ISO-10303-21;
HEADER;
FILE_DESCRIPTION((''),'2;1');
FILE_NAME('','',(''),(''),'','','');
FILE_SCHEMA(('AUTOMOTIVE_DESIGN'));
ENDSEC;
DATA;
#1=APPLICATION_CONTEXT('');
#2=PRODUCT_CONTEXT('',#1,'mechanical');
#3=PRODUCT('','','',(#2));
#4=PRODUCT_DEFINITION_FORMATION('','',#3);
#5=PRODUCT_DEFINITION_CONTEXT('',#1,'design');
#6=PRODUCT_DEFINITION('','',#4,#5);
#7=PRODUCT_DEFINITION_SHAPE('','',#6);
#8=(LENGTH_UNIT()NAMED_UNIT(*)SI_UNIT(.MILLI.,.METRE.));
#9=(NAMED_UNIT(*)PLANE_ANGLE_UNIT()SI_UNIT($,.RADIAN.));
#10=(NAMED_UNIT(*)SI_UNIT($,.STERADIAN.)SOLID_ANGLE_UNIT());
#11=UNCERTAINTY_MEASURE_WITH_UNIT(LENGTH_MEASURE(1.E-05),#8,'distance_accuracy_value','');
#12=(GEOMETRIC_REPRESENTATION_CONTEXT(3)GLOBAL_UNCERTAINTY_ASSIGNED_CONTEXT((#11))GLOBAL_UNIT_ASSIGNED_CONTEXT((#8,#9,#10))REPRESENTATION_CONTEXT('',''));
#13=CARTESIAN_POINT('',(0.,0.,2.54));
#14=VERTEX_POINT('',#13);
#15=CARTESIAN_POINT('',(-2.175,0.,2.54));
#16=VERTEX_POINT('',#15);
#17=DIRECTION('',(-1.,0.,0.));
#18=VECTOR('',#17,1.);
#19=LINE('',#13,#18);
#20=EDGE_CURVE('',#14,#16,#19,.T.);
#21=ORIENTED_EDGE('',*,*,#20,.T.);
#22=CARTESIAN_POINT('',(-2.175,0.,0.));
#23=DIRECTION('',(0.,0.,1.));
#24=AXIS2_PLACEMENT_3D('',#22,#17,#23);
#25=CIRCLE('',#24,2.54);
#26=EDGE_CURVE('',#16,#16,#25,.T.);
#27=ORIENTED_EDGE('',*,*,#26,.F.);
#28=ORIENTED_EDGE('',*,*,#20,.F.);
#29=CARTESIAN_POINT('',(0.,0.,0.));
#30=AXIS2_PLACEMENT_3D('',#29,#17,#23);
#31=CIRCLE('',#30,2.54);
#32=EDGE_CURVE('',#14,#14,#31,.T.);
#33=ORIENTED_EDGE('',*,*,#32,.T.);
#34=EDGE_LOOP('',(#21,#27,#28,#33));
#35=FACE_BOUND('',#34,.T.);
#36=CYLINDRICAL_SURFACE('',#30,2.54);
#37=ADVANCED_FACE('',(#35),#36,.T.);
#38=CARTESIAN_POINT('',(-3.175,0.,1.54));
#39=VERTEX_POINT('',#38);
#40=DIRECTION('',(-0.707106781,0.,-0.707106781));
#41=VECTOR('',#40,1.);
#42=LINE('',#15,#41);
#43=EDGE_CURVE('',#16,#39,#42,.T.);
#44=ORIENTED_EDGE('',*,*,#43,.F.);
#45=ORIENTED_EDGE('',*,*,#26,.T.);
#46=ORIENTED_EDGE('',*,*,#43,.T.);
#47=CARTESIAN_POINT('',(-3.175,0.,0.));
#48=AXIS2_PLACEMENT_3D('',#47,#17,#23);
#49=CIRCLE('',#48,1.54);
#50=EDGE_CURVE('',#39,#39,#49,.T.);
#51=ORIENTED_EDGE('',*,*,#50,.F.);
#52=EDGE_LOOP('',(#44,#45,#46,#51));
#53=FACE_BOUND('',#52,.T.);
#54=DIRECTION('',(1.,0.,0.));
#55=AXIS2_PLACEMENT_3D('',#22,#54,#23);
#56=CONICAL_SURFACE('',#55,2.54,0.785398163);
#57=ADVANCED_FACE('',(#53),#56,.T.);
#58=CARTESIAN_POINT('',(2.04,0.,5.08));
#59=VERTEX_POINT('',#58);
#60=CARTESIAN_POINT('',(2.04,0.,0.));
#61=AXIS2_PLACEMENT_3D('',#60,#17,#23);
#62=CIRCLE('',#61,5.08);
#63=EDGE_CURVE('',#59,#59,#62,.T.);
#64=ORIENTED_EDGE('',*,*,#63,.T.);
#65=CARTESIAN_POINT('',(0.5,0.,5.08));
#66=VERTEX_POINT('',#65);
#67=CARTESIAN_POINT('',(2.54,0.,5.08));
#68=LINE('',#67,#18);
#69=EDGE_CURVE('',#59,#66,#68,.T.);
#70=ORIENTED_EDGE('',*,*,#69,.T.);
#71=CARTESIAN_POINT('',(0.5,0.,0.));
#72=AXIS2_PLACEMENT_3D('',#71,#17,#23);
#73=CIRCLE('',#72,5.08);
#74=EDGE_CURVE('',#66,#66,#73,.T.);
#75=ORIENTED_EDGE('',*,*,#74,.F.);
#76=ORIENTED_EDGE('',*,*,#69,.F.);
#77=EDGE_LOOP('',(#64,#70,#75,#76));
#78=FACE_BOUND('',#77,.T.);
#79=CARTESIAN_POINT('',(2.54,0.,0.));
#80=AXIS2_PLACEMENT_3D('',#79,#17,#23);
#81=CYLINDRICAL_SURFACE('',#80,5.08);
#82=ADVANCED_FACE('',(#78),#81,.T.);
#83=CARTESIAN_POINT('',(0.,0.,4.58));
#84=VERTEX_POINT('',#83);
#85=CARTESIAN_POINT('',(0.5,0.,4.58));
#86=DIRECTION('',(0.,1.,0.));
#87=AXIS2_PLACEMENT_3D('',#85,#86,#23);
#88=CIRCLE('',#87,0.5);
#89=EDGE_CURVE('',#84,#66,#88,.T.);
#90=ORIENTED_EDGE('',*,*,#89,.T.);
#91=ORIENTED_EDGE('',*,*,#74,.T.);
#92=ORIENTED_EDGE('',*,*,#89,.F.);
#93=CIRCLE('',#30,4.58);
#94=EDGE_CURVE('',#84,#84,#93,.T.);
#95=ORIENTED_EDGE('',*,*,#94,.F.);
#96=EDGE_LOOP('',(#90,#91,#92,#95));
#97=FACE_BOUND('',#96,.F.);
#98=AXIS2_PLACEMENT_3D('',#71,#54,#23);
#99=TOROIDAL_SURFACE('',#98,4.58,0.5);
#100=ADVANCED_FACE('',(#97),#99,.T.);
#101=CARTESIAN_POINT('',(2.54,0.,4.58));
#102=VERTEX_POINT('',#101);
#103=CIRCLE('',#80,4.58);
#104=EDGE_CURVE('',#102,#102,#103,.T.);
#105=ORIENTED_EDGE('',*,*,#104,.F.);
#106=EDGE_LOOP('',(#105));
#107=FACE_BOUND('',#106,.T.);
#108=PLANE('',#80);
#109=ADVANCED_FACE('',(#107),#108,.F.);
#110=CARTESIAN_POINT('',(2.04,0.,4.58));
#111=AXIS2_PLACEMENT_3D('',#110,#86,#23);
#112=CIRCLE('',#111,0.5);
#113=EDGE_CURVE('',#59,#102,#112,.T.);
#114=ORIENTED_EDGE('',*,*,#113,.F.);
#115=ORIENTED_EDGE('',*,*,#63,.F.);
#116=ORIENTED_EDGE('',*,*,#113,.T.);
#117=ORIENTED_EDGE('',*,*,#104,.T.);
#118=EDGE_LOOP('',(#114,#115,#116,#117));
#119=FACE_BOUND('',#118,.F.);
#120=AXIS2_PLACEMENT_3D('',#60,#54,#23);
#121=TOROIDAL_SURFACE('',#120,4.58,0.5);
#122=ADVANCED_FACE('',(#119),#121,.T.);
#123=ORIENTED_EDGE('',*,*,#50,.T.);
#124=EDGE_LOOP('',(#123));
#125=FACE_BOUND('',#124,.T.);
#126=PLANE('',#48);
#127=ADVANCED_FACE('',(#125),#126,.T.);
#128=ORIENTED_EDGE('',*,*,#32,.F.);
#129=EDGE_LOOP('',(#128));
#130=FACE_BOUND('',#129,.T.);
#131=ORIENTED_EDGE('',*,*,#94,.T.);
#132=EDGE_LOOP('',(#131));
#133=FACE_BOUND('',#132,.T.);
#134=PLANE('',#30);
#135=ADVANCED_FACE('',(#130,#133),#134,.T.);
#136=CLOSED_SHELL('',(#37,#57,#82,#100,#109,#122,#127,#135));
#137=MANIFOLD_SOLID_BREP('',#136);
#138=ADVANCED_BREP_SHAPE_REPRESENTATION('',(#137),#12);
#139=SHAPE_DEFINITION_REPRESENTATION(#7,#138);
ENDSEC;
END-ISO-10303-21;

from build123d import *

# Parameters (mm, degrees)
F2_SIZE = 1
F3_R    = 0.5


with BuildPart() as f1:
    # F0 (on Front) → F1 (revolve)
    with BuildSketch(Plane.XZ):
        Polygon((0, 5.08), (0, 2.54), (-3.175, 2.54), (-3.175, 0), (2.54, 0), (2.54, 5.08), align=None)
    revolve(axis=Axis((-24.3718145439, 0, 0), (-1, 0, 0)))

    # F2
    f2_edges = [f1.edges().sort_by_distance(p)[0] for p in [
        (-3.175, 0, -2.54),
    ]]
    chamfer(f2_edges, length=F2_SIZE)

    # F3
    f3_edges = [f1.edges().sort_by_distance(p)[0] for p in [
        (0, 0, -5.08),
        (2.54, 0, -5.08),
    ]]
    fillet(f3_edges, radius=F3_R)


solid = f1.part
